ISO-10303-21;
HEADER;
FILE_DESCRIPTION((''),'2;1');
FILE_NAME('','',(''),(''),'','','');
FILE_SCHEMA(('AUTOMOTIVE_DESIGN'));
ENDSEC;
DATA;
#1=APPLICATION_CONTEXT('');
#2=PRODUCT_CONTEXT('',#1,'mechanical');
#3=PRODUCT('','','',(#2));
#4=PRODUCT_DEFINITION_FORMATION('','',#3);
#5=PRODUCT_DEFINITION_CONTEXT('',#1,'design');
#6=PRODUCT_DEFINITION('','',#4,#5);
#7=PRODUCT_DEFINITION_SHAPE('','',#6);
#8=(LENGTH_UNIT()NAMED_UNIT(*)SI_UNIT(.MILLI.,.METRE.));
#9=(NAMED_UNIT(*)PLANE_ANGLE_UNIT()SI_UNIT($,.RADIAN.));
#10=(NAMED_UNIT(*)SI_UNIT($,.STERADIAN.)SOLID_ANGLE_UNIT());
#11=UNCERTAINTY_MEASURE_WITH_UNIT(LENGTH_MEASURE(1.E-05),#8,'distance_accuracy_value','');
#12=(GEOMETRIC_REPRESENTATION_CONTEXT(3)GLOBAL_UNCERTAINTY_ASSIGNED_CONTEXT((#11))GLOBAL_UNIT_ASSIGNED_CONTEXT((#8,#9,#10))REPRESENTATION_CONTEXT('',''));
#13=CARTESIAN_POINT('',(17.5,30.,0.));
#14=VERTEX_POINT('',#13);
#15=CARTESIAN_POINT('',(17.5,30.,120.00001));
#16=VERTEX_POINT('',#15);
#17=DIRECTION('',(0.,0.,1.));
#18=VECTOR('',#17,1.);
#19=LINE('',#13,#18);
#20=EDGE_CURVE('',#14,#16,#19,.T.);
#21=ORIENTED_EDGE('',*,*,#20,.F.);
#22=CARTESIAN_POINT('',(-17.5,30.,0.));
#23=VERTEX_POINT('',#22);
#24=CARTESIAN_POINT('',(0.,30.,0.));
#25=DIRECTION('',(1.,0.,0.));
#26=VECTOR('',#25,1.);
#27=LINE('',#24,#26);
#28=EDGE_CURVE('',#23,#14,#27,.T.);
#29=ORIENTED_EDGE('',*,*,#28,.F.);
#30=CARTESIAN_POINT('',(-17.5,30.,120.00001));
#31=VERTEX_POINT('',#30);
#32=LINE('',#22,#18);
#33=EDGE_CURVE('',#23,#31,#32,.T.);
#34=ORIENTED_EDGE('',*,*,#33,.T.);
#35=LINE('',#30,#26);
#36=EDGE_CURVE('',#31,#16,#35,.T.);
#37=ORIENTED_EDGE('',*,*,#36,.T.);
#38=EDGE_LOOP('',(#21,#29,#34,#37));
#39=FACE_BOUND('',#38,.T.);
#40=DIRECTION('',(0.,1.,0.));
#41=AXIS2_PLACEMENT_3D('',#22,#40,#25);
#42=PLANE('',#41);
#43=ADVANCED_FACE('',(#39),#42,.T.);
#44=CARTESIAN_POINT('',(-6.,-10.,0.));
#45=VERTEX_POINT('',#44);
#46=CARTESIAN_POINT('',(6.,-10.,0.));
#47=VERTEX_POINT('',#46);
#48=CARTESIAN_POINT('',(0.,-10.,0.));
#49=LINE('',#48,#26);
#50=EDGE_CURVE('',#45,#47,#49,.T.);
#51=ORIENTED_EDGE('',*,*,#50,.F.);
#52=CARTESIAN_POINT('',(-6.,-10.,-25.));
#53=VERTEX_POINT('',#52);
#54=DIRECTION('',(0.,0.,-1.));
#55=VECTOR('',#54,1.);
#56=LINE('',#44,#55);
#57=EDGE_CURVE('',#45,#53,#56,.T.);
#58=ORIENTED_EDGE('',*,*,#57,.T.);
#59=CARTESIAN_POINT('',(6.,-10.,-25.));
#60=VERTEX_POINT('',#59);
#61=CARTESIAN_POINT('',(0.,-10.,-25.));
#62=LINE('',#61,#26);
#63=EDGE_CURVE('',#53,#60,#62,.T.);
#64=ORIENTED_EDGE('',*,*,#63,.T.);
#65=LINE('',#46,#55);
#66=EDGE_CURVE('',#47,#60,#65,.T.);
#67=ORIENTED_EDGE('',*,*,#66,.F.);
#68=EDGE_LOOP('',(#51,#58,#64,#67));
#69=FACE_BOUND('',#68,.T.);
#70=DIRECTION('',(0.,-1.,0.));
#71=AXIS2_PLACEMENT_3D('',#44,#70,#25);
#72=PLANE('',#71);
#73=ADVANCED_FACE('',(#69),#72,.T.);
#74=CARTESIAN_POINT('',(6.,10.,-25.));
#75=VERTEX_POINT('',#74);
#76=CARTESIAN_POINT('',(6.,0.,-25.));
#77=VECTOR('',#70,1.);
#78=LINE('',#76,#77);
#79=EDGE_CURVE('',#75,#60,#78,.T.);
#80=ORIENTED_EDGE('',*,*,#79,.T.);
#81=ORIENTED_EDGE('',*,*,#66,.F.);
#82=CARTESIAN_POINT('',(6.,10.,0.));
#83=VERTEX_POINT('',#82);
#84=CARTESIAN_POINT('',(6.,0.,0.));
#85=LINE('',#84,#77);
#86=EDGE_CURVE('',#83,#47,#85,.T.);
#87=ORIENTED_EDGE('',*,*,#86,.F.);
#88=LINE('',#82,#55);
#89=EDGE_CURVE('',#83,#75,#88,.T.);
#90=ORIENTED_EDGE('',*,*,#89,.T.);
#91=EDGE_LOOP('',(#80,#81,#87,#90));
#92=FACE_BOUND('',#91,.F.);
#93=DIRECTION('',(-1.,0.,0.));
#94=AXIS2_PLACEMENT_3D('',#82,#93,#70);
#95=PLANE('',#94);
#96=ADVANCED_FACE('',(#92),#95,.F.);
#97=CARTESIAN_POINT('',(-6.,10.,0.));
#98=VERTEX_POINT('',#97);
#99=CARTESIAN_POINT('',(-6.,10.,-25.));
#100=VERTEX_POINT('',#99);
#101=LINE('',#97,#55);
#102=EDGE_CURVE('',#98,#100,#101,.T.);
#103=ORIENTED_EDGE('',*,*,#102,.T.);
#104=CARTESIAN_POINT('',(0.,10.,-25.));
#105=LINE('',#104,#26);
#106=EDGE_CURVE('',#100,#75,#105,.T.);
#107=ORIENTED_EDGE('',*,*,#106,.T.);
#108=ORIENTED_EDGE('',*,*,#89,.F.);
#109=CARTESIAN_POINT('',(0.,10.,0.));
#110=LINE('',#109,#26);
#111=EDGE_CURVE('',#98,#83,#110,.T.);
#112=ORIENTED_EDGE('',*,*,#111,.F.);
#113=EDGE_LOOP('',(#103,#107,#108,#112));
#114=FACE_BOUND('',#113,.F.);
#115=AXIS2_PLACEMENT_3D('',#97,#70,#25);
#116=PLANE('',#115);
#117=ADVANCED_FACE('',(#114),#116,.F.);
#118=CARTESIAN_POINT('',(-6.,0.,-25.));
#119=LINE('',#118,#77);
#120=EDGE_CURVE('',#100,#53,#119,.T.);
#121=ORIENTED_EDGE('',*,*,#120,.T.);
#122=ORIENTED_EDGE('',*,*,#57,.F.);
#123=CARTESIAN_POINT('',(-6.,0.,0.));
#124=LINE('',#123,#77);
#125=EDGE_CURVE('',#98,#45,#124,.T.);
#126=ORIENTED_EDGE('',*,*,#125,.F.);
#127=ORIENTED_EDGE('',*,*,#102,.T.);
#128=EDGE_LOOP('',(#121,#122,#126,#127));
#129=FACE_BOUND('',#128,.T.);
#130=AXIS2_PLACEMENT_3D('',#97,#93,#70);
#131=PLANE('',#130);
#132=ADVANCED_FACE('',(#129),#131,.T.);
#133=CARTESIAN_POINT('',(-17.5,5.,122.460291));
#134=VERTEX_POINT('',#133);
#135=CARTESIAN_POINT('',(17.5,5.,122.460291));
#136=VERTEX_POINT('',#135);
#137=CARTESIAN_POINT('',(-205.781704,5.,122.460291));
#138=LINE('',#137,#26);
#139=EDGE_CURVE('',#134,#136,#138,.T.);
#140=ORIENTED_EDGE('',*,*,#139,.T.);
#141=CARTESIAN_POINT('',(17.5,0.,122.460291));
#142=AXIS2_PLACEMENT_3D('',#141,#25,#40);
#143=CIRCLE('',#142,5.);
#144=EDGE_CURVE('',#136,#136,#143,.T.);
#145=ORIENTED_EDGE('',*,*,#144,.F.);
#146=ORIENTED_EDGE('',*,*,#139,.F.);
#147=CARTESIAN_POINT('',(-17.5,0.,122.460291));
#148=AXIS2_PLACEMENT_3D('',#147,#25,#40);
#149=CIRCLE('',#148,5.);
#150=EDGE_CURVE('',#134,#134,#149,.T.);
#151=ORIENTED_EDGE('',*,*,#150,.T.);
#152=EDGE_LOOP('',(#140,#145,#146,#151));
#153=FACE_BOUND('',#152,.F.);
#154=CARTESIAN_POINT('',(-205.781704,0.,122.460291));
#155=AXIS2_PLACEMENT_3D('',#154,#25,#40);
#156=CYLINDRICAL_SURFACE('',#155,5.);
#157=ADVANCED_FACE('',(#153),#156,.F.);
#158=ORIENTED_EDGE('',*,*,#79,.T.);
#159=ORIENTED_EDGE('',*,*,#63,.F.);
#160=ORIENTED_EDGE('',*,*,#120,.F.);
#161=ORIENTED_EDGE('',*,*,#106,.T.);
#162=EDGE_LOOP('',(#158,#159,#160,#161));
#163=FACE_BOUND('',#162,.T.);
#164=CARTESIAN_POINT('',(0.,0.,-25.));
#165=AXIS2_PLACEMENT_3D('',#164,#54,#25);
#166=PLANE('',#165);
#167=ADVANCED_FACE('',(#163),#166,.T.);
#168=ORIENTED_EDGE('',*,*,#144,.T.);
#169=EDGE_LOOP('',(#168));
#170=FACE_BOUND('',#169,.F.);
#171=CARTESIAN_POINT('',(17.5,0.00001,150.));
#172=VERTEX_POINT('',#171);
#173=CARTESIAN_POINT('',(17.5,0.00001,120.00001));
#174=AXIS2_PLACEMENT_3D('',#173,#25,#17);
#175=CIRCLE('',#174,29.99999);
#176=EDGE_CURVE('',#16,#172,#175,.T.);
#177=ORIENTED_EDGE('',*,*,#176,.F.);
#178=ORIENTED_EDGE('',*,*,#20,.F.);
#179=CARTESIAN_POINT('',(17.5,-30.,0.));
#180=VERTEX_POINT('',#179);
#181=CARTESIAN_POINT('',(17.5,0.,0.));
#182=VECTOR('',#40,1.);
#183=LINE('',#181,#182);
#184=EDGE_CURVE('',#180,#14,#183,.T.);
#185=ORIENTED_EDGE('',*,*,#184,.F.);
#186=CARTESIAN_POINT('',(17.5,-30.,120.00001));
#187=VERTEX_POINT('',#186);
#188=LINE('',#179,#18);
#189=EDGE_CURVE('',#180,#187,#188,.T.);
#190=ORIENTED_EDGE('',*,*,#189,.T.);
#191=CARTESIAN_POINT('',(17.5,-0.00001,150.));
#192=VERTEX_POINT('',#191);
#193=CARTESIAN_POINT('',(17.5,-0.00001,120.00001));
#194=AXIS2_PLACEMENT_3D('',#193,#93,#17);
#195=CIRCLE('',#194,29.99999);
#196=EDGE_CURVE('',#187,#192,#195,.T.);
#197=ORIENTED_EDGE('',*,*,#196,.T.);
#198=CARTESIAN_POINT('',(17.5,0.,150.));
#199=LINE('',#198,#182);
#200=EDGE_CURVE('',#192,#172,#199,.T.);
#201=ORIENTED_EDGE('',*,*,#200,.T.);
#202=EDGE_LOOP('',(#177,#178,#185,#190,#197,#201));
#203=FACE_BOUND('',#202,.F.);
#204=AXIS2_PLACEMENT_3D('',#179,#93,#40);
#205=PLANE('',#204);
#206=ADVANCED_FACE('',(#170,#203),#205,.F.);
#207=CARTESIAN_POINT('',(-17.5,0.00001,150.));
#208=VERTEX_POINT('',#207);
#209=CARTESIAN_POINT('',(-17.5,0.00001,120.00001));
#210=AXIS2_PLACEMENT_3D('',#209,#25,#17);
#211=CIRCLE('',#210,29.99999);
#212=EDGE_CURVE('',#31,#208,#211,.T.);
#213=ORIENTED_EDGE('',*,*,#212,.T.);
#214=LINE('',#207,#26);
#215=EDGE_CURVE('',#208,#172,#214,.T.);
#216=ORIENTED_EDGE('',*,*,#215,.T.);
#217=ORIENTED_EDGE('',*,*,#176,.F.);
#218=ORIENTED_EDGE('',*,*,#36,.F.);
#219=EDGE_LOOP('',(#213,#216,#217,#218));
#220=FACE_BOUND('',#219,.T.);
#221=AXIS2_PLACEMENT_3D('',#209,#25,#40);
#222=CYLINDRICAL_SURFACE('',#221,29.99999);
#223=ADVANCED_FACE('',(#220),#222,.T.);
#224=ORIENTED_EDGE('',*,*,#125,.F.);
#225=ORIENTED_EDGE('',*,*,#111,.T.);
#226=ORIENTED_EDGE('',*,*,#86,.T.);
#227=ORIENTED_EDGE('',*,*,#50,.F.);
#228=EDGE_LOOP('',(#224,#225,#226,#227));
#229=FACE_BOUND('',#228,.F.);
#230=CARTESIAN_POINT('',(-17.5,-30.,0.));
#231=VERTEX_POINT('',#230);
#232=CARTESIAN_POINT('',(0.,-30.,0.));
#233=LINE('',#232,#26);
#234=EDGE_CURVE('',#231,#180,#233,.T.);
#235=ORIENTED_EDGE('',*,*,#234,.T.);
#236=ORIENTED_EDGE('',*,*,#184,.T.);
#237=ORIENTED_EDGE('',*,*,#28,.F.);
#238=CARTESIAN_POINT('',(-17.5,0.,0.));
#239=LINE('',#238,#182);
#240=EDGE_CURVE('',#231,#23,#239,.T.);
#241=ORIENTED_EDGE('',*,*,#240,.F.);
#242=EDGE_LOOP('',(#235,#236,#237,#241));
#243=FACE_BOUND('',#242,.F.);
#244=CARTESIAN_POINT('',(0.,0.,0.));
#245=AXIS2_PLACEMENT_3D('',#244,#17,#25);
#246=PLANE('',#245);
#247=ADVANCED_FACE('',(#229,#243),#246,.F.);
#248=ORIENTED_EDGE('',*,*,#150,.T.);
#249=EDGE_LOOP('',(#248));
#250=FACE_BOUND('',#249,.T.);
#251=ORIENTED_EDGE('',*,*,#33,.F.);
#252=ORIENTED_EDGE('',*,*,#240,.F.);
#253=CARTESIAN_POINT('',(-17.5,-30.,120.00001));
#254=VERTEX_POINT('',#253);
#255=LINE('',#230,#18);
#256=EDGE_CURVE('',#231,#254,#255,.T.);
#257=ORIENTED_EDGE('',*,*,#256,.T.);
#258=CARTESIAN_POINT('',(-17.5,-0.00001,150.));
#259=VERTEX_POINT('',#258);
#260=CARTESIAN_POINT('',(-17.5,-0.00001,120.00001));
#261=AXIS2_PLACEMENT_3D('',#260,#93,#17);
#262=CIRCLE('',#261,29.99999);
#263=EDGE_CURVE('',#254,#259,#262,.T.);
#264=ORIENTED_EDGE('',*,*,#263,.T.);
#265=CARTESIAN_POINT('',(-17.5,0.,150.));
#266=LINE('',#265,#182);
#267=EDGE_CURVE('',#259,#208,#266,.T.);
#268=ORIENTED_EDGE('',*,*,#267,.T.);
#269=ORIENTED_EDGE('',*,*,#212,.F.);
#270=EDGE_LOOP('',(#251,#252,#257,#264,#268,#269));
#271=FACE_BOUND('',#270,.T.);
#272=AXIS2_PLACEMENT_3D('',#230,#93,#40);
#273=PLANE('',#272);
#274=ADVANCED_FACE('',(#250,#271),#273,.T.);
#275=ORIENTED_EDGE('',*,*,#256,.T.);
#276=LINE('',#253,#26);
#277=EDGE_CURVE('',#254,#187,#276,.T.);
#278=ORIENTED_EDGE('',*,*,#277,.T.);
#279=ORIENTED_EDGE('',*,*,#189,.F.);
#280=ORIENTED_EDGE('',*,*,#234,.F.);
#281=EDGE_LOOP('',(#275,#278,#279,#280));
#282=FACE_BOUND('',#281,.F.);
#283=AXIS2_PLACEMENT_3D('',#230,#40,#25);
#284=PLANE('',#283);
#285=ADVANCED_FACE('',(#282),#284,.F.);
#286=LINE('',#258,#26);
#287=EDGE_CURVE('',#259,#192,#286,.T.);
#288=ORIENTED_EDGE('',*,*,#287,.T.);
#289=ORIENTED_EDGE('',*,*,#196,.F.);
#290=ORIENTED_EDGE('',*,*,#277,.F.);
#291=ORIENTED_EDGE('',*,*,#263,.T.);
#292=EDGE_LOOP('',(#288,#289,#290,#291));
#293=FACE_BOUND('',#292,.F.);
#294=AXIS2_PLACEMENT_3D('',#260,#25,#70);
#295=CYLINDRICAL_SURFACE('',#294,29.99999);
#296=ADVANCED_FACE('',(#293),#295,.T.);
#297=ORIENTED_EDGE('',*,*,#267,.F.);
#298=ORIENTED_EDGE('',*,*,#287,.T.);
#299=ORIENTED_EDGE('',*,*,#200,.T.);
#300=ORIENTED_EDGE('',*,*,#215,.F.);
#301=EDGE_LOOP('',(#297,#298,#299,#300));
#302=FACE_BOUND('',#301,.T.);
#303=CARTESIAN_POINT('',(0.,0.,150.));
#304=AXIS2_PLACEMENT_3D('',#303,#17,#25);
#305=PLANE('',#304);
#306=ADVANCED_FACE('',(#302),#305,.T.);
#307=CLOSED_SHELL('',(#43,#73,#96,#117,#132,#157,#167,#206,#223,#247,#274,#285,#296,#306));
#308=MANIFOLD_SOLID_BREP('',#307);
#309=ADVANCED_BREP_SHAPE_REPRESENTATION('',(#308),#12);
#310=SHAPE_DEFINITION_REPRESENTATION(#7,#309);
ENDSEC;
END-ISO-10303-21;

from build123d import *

# Parameters (mm, degrees)
F0_W     = 35
F0_H     = 60
F1_DEPTH = 150
F2_W     = 12
F2_H     = 20
F3_DEPTH = 25
F4_R     = 29.99999
F6_D     = 10


# Not quite as in the source:
# - a fillet or chamfer is up to 0.001 mm smaller than in the source, because OpenCascade refuses the exact size


with BuildPart() as f1:
    # F0 (on Top) → F1 (new body)
    with BuildSketch(Plane.XY):
        Rectangle(F0_W, F0_H)
    extrude(amount=F1_DEPTH)

    # F2 (on face) → F3 (join)
    with BuildSketch(Plane(origin=(0, 0, 0), x_dir=(1, 0, 0), z_dir=(0, 0, -1))):
        Rectangle(F2_W, F2_H)
    extrude(amount=F3_DEPTH)

    # F4 (radius 30 in the source; OpenCascade refuses exactly that, so slightly less here)
    f4_edges = [f1.edges().sort_by_distance(p)[0] for p in [
        (0, -30, 150),
        (0, 30, 150),
    ]]
    fillet(f4_edges, radius=F4_R)

    # F6 (through all)
    with Locations(Plane(origin=(-17.5, 0, 0), x_dir=(0, -1, 0), z_dir=(-1, 0, 0))):
        with Locations((0, 122.46029087)):
            Hole(F6_D / 2)


solid = f1.part
